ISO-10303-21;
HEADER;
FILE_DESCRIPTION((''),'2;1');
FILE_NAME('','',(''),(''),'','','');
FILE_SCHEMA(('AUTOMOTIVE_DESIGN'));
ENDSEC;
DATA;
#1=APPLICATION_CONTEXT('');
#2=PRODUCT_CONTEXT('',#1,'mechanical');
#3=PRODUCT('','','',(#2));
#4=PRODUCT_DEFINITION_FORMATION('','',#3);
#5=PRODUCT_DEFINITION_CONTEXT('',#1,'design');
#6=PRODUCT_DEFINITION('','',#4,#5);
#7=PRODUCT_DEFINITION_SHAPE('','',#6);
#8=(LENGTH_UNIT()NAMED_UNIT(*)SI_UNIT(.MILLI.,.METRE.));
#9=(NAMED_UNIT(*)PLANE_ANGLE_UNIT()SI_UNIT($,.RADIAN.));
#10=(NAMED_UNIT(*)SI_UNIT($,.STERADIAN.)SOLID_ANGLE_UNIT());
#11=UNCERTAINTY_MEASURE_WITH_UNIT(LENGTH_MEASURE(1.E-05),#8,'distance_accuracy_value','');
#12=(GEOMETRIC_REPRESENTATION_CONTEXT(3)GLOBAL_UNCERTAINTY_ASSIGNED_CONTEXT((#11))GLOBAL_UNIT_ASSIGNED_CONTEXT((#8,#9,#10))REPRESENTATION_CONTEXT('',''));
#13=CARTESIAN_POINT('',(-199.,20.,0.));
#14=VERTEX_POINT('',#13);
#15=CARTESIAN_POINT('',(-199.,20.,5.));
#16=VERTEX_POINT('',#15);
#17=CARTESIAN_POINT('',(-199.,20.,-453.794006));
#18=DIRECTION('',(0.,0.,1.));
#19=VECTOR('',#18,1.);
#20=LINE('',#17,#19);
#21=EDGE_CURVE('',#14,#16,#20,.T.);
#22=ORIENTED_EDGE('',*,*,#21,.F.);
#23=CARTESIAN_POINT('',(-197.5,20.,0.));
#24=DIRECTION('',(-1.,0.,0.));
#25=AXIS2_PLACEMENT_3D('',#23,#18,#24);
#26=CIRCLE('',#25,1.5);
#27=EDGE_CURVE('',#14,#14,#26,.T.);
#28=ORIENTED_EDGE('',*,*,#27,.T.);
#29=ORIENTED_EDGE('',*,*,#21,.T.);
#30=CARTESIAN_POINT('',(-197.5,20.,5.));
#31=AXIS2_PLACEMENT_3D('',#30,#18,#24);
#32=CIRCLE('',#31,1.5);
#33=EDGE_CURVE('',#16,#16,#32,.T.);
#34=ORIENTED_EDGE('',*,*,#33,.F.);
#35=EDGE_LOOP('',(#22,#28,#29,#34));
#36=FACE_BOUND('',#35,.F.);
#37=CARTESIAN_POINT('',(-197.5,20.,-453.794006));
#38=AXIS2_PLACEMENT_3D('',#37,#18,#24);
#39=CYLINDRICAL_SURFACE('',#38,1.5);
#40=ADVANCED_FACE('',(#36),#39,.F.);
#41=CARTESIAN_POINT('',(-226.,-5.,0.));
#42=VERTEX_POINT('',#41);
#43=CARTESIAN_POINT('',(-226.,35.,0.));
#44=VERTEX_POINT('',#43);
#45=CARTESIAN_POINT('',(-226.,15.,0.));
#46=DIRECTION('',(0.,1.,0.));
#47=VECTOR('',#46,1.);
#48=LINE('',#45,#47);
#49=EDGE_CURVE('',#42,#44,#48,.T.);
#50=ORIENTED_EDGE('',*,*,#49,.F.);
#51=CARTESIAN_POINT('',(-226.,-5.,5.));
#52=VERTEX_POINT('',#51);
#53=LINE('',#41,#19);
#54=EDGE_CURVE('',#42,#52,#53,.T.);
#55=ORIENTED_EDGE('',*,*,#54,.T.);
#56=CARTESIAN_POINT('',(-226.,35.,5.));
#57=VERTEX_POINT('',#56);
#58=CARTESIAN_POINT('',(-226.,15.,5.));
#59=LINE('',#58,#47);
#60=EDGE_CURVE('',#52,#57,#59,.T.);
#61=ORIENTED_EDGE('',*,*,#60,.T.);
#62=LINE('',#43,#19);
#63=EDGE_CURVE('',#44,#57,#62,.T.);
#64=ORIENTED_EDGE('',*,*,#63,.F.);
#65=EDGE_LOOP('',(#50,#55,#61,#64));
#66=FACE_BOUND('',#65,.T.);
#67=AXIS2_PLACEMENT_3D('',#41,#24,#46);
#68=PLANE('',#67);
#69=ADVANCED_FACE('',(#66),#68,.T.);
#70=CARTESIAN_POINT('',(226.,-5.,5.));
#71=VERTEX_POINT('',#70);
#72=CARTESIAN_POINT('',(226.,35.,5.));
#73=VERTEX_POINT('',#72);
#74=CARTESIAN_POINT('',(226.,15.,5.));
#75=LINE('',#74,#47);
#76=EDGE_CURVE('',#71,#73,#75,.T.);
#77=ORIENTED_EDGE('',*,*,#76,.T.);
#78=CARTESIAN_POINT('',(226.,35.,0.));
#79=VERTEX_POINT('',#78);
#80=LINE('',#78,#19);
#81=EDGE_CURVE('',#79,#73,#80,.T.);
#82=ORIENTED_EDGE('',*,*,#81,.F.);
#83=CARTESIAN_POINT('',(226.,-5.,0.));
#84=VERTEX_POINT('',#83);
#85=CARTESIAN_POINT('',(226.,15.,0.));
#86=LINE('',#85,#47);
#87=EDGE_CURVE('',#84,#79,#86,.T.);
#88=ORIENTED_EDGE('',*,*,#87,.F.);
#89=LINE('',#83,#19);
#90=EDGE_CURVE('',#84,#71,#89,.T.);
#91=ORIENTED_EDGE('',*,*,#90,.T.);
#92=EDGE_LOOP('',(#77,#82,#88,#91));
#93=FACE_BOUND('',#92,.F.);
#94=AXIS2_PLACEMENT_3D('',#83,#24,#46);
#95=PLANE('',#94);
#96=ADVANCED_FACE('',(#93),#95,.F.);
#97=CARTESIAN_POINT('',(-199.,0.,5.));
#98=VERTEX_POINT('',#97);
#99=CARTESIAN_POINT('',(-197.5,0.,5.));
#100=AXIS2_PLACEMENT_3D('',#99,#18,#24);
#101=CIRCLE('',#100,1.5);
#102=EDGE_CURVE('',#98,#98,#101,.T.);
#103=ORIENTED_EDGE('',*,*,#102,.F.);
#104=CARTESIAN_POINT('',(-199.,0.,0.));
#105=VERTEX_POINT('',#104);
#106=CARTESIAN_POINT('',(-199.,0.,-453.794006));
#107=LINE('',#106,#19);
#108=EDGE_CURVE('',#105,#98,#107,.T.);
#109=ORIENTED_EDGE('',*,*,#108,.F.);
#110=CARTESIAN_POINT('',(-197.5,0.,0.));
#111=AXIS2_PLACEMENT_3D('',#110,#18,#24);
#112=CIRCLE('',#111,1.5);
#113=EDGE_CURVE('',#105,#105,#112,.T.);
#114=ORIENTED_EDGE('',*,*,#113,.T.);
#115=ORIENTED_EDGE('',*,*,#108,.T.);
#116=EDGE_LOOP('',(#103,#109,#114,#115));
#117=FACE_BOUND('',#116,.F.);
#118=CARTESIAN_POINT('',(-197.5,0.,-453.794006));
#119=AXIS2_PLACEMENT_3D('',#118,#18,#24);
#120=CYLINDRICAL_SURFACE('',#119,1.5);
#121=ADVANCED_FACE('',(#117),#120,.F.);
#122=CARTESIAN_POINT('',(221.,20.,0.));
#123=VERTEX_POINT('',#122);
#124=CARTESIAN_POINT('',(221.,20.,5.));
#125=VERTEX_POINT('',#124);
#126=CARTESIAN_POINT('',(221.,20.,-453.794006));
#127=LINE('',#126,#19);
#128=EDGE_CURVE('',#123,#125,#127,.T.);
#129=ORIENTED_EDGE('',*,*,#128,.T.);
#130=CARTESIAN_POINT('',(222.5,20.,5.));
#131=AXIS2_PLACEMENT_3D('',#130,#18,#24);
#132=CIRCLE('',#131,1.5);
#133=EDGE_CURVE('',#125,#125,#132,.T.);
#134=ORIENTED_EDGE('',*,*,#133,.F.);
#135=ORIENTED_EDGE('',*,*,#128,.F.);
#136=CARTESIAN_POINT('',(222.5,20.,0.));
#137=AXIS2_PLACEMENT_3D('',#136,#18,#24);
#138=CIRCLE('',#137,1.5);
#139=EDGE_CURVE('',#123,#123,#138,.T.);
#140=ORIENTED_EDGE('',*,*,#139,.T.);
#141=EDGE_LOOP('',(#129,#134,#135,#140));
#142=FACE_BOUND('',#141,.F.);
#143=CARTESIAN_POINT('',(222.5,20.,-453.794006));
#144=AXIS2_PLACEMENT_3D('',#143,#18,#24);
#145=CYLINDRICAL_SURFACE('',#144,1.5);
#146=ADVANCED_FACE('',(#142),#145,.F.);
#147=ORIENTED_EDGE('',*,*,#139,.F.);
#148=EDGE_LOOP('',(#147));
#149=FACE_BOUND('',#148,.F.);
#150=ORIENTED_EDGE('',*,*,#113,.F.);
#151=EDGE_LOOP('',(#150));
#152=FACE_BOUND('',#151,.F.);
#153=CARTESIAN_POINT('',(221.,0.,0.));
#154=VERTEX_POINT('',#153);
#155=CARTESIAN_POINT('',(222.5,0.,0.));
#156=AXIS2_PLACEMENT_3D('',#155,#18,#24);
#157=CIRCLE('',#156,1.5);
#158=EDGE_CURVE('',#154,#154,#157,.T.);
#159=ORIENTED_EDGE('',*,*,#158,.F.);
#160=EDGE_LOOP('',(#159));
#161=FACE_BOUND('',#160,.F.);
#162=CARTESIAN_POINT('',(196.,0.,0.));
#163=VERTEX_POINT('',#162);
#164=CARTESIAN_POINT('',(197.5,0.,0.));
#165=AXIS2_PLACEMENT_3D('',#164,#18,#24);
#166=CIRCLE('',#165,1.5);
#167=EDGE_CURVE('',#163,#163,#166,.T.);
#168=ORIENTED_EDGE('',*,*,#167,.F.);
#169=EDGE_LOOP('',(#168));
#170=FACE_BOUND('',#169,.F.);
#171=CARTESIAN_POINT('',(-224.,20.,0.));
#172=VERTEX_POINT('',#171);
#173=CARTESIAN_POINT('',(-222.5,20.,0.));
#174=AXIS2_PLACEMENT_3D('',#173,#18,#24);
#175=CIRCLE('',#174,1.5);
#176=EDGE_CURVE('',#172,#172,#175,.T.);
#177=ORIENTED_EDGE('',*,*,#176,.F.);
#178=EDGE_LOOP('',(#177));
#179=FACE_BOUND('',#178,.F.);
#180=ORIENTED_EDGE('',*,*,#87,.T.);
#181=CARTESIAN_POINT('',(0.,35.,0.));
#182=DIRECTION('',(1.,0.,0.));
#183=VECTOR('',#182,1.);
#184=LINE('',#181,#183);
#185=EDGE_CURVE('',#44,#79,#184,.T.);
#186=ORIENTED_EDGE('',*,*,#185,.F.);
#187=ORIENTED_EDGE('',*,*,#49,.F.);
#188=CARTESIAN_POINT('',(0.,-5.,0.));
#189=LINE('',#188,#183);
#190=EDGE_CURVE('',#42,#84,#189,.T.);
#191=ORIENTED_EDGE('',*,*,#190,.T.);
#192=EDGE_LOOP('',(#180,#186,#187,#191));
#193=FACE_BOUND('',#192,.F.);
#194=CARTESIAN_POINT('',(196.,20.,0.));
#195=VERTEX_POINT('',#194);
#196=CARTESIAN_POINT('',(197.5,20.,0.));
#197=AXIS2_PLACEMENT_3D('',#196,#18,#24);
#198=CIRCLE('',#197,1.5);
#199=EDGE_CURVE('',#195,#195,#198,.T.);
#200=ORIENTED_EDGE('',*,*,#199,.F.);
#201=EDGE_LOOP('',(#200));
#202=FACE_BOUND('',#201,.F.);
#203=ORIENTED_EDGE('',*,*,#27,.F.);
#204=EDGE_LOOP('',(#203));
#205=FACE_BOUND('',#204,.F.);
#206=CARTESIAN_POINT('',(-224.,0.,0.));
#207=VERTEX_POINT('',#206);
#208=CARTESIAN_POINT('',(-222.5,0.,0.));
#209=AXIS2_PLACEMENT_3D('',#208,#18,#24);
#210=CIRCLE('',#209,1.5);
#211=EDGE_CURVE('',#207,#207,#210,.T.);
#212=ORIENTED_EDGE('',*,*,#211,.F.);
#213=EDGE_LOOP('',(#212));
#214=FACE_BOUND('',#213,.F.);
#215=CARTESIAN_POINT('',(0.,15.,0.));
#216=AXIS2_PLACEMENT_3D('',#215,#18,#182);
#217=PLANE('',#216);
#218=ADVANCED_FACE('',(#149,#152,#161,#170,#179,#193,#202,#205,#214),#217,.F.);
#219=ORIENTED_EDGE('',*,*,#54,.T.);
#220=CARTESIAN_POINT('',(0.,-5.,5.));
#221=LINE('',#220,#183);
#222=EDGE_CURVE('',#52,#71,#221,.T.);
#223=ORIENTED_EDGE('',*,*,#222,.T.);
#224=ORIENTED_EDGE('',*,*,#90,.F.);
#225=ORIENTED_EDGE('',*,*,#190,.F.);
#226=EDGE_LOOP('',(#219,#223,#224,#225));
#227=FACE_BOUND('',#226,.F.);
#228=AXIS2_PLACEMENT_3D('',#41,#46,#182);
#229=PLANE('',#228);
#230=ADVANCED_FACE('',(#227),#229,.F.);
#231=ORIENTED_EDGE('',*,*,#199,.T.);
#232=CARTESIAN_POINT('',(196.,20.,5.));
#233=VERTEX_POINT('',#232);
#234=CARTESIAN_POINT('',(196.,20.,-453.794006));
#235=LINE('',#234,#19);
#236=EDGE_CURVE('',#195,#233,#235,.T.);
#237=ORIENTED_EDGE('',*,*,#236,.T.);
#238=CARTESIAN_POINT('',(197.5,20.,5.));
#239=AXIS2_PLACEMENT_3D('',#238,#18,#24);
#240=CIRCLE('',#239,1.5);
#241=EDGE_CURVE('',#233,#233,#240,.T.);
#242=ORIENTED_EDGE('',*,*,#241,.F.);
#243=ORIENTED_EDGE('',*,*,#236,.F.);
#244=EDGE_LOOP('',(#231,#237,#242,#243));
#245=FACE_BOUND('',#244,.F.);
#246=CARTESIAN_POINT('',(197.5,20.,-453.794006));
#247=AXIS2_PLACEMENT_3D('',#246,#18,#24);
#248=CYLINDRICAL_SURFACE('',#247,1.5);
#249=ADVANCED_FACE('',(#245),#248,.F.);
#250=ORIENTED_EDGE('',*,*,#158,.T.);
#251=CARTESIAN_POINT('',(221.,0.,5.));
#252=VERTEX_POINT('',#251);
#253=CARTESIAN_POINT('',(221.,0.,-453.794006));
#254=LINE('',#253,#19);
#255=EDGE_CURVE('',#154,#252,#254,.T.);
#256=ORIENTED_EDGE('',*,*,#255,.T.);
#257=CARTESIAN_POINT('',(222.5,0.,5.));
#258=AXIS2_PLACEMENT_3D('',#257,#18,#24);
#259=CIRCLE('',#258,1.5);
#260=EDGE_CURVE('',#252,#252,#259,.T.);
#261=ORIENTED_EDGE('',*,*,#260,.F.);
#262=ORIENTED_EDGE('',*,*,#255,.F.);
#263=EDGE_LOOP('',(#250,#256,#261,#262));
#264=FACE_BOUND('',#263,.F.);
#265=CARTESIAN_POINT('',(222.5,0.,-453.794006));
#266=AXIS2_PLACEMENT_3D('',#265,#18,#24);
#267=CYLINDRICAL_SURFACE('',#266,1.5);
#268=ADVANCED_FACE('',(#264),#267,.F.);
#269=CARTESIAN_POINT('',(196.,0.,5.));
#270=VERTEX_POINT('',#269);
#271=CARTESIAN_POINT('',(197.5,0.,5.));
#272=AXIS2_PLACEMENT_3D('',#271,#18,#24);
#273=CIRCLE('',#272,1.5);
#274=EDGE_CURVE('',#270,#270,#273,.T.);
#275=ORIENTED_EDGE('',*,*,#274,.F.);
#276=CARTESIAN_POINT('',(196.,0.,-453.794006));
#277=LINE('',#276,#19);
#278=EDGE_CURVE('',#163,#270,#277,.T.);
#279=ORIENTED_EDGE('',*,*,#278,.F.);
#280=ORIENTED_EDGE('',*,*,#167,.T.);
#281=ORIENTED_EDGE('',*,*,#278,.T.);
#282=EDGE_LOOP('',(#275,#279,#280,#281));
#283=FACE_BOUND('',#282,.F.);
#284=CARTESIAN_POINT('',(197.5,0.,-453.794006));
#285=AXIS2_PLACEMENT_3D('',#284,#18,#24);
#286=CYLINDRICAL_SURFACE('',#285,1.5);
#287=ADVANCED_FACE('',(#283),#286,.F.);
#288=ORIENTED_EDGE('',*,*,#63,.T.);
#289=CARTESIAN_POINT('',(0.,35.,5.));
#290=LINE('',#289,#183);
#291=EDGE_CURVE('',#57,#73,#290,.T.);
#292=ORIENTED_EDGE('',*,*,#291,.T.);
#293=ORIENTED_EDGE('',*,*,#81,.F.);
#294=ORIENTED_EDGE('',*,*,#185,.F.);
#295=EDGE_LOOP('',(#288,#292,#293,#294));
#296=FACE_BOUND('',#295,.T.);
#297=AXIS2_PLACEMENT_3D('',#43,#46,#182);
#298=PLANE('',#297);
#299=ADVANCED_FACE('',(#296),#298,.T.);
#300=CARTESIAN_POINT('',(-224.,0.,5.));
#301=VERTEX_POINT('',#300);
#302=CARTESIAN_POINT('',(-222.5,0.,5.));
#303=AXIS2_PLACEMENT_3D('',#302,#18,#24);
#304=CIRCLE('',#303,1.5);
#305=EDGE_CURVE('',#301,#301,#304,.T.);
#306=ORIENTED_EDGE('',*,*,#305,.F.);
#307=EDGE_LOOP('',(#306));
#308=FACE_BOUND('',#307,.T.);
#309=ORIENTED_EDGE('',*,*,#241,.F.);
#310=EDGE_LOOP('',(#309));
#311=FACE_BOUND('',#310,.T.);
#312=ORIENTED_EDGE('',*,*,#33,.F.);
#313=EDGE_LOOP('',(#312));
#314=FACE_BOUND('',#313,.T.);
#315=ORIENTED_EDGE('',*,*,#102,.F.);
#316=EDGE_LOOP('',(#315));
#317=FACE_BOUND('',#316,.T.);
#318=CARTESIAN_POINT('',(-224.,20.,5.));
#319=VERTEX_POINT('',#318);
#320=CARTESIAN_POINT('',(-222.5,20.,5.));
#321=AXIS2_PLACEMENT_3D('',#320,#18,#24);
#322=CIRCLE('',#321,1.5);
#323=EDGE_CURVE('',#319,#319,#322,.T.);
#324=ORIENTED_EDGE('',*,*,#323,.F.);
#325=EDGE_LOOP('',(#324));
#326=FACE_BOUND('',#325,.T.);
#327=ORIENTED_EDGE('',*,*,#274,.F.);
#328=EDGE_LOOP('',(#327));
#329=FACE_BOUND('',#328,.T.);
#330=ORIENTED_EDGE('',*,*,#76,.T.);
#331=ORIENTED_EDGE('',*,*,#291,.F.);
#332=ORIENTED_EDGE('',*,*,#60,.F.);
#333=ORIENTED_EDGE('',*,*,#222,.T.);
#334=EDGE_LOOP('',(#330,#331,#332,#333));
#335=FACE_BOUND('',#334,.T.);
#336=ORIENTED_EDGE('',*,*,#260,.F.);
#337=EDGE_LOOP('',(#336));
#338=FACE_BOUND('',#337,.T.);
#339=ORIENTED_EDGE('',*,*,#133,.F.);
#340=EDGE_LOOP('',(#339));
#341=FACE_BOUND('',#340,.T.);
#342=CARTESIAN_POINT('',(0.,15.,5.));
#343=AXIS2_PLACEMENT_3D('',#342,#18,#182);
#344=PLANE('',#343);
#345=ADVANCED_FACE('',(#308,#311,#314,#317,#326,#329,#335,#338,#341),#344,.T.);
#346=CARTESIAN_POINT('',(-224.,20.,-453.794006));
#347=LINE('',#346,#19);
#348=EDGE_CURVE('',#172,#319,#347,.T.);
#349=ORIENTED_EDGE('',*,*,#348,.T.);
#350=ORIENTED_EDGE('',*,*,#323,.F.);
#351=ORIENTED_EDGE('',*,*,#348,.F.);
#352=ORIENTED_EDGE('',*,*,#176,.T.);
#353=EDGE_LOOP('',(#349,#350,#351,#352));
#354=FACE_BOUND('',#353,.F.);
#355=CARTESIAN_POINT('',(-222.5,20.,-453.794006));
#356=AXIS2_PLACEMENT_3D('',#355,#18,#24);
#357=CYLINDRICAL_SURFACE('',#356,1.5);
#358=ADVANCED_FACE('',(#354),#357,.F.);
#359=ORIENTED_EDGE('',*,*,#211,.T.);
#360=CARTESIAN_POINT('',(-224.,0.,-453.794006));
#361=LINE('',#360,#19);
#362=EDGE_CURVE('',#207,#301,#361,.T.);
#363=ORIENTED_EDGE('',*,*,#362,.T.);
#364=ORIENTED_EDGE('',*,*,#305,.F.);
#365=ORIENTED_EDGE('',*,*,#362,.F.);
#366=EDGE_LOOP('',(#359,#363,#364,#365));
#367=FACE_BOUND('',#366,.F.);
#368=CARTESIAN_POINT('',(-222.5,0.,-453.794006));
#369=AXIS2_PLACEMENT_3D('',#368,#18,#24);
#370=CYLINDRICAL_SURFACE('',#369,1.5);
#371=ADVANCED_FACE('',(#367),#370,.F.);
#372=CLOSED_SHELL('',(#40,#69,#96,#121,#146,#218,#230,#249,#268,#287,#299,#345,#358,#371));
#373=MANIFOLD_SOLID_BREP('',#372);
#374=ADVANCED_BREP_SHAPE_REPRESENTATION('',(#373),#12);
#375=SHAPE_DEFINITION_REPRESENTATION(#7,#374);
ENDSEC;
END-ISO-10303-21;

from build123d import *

# Parameters (mm, degrees)
F0_W     = 452
F0_H     = 40
F0_W_2   = 25
F0_H_2   = 20
F1_DEPTH = 5
F2_D     = 3


# Not quite as in the source:
# - a feature names something its author has since deleted; it is built from what else it names


with BuildPart() as f1:
    # F0 (on Top) → F1 (new body)
    with BuildSketch(Plane.XY):
        with Locations((0, 15)):
            Rectangle(F0_W, F0_H)
        with Locations((-210, 10)):
            Rectangle(F0_W_2, F0_H_2, mode=Mode.SUBTRACT)
        with Locations((210, 10)):
            Rectangle(F0_W_2, F0_H_2, mode=Mode.SUBTRACT)
        with Locations((210, 10)):
            Rectangle(F0_W_2, F0_H_2)
        with Locations((-210, 10)):
            Rectangle(F0_W_2, F0_H_2)
    extrude(amount=F1_DEPTH)

    # F2 (through all)
    with Locations(Plane(origin=(0, 0, 0), x_dir=(1, 0, 0), z_dir=(0, 0, -1))):
        with Locations((-222.5, 0), (-197.5, 0), (197.5, 0), (222.5, 0), (-222.5, -20), (-197.5, -20), (222.5, -20), (197.5, -20)):
            Hole(F2_D / 2)


solid = f1.part
